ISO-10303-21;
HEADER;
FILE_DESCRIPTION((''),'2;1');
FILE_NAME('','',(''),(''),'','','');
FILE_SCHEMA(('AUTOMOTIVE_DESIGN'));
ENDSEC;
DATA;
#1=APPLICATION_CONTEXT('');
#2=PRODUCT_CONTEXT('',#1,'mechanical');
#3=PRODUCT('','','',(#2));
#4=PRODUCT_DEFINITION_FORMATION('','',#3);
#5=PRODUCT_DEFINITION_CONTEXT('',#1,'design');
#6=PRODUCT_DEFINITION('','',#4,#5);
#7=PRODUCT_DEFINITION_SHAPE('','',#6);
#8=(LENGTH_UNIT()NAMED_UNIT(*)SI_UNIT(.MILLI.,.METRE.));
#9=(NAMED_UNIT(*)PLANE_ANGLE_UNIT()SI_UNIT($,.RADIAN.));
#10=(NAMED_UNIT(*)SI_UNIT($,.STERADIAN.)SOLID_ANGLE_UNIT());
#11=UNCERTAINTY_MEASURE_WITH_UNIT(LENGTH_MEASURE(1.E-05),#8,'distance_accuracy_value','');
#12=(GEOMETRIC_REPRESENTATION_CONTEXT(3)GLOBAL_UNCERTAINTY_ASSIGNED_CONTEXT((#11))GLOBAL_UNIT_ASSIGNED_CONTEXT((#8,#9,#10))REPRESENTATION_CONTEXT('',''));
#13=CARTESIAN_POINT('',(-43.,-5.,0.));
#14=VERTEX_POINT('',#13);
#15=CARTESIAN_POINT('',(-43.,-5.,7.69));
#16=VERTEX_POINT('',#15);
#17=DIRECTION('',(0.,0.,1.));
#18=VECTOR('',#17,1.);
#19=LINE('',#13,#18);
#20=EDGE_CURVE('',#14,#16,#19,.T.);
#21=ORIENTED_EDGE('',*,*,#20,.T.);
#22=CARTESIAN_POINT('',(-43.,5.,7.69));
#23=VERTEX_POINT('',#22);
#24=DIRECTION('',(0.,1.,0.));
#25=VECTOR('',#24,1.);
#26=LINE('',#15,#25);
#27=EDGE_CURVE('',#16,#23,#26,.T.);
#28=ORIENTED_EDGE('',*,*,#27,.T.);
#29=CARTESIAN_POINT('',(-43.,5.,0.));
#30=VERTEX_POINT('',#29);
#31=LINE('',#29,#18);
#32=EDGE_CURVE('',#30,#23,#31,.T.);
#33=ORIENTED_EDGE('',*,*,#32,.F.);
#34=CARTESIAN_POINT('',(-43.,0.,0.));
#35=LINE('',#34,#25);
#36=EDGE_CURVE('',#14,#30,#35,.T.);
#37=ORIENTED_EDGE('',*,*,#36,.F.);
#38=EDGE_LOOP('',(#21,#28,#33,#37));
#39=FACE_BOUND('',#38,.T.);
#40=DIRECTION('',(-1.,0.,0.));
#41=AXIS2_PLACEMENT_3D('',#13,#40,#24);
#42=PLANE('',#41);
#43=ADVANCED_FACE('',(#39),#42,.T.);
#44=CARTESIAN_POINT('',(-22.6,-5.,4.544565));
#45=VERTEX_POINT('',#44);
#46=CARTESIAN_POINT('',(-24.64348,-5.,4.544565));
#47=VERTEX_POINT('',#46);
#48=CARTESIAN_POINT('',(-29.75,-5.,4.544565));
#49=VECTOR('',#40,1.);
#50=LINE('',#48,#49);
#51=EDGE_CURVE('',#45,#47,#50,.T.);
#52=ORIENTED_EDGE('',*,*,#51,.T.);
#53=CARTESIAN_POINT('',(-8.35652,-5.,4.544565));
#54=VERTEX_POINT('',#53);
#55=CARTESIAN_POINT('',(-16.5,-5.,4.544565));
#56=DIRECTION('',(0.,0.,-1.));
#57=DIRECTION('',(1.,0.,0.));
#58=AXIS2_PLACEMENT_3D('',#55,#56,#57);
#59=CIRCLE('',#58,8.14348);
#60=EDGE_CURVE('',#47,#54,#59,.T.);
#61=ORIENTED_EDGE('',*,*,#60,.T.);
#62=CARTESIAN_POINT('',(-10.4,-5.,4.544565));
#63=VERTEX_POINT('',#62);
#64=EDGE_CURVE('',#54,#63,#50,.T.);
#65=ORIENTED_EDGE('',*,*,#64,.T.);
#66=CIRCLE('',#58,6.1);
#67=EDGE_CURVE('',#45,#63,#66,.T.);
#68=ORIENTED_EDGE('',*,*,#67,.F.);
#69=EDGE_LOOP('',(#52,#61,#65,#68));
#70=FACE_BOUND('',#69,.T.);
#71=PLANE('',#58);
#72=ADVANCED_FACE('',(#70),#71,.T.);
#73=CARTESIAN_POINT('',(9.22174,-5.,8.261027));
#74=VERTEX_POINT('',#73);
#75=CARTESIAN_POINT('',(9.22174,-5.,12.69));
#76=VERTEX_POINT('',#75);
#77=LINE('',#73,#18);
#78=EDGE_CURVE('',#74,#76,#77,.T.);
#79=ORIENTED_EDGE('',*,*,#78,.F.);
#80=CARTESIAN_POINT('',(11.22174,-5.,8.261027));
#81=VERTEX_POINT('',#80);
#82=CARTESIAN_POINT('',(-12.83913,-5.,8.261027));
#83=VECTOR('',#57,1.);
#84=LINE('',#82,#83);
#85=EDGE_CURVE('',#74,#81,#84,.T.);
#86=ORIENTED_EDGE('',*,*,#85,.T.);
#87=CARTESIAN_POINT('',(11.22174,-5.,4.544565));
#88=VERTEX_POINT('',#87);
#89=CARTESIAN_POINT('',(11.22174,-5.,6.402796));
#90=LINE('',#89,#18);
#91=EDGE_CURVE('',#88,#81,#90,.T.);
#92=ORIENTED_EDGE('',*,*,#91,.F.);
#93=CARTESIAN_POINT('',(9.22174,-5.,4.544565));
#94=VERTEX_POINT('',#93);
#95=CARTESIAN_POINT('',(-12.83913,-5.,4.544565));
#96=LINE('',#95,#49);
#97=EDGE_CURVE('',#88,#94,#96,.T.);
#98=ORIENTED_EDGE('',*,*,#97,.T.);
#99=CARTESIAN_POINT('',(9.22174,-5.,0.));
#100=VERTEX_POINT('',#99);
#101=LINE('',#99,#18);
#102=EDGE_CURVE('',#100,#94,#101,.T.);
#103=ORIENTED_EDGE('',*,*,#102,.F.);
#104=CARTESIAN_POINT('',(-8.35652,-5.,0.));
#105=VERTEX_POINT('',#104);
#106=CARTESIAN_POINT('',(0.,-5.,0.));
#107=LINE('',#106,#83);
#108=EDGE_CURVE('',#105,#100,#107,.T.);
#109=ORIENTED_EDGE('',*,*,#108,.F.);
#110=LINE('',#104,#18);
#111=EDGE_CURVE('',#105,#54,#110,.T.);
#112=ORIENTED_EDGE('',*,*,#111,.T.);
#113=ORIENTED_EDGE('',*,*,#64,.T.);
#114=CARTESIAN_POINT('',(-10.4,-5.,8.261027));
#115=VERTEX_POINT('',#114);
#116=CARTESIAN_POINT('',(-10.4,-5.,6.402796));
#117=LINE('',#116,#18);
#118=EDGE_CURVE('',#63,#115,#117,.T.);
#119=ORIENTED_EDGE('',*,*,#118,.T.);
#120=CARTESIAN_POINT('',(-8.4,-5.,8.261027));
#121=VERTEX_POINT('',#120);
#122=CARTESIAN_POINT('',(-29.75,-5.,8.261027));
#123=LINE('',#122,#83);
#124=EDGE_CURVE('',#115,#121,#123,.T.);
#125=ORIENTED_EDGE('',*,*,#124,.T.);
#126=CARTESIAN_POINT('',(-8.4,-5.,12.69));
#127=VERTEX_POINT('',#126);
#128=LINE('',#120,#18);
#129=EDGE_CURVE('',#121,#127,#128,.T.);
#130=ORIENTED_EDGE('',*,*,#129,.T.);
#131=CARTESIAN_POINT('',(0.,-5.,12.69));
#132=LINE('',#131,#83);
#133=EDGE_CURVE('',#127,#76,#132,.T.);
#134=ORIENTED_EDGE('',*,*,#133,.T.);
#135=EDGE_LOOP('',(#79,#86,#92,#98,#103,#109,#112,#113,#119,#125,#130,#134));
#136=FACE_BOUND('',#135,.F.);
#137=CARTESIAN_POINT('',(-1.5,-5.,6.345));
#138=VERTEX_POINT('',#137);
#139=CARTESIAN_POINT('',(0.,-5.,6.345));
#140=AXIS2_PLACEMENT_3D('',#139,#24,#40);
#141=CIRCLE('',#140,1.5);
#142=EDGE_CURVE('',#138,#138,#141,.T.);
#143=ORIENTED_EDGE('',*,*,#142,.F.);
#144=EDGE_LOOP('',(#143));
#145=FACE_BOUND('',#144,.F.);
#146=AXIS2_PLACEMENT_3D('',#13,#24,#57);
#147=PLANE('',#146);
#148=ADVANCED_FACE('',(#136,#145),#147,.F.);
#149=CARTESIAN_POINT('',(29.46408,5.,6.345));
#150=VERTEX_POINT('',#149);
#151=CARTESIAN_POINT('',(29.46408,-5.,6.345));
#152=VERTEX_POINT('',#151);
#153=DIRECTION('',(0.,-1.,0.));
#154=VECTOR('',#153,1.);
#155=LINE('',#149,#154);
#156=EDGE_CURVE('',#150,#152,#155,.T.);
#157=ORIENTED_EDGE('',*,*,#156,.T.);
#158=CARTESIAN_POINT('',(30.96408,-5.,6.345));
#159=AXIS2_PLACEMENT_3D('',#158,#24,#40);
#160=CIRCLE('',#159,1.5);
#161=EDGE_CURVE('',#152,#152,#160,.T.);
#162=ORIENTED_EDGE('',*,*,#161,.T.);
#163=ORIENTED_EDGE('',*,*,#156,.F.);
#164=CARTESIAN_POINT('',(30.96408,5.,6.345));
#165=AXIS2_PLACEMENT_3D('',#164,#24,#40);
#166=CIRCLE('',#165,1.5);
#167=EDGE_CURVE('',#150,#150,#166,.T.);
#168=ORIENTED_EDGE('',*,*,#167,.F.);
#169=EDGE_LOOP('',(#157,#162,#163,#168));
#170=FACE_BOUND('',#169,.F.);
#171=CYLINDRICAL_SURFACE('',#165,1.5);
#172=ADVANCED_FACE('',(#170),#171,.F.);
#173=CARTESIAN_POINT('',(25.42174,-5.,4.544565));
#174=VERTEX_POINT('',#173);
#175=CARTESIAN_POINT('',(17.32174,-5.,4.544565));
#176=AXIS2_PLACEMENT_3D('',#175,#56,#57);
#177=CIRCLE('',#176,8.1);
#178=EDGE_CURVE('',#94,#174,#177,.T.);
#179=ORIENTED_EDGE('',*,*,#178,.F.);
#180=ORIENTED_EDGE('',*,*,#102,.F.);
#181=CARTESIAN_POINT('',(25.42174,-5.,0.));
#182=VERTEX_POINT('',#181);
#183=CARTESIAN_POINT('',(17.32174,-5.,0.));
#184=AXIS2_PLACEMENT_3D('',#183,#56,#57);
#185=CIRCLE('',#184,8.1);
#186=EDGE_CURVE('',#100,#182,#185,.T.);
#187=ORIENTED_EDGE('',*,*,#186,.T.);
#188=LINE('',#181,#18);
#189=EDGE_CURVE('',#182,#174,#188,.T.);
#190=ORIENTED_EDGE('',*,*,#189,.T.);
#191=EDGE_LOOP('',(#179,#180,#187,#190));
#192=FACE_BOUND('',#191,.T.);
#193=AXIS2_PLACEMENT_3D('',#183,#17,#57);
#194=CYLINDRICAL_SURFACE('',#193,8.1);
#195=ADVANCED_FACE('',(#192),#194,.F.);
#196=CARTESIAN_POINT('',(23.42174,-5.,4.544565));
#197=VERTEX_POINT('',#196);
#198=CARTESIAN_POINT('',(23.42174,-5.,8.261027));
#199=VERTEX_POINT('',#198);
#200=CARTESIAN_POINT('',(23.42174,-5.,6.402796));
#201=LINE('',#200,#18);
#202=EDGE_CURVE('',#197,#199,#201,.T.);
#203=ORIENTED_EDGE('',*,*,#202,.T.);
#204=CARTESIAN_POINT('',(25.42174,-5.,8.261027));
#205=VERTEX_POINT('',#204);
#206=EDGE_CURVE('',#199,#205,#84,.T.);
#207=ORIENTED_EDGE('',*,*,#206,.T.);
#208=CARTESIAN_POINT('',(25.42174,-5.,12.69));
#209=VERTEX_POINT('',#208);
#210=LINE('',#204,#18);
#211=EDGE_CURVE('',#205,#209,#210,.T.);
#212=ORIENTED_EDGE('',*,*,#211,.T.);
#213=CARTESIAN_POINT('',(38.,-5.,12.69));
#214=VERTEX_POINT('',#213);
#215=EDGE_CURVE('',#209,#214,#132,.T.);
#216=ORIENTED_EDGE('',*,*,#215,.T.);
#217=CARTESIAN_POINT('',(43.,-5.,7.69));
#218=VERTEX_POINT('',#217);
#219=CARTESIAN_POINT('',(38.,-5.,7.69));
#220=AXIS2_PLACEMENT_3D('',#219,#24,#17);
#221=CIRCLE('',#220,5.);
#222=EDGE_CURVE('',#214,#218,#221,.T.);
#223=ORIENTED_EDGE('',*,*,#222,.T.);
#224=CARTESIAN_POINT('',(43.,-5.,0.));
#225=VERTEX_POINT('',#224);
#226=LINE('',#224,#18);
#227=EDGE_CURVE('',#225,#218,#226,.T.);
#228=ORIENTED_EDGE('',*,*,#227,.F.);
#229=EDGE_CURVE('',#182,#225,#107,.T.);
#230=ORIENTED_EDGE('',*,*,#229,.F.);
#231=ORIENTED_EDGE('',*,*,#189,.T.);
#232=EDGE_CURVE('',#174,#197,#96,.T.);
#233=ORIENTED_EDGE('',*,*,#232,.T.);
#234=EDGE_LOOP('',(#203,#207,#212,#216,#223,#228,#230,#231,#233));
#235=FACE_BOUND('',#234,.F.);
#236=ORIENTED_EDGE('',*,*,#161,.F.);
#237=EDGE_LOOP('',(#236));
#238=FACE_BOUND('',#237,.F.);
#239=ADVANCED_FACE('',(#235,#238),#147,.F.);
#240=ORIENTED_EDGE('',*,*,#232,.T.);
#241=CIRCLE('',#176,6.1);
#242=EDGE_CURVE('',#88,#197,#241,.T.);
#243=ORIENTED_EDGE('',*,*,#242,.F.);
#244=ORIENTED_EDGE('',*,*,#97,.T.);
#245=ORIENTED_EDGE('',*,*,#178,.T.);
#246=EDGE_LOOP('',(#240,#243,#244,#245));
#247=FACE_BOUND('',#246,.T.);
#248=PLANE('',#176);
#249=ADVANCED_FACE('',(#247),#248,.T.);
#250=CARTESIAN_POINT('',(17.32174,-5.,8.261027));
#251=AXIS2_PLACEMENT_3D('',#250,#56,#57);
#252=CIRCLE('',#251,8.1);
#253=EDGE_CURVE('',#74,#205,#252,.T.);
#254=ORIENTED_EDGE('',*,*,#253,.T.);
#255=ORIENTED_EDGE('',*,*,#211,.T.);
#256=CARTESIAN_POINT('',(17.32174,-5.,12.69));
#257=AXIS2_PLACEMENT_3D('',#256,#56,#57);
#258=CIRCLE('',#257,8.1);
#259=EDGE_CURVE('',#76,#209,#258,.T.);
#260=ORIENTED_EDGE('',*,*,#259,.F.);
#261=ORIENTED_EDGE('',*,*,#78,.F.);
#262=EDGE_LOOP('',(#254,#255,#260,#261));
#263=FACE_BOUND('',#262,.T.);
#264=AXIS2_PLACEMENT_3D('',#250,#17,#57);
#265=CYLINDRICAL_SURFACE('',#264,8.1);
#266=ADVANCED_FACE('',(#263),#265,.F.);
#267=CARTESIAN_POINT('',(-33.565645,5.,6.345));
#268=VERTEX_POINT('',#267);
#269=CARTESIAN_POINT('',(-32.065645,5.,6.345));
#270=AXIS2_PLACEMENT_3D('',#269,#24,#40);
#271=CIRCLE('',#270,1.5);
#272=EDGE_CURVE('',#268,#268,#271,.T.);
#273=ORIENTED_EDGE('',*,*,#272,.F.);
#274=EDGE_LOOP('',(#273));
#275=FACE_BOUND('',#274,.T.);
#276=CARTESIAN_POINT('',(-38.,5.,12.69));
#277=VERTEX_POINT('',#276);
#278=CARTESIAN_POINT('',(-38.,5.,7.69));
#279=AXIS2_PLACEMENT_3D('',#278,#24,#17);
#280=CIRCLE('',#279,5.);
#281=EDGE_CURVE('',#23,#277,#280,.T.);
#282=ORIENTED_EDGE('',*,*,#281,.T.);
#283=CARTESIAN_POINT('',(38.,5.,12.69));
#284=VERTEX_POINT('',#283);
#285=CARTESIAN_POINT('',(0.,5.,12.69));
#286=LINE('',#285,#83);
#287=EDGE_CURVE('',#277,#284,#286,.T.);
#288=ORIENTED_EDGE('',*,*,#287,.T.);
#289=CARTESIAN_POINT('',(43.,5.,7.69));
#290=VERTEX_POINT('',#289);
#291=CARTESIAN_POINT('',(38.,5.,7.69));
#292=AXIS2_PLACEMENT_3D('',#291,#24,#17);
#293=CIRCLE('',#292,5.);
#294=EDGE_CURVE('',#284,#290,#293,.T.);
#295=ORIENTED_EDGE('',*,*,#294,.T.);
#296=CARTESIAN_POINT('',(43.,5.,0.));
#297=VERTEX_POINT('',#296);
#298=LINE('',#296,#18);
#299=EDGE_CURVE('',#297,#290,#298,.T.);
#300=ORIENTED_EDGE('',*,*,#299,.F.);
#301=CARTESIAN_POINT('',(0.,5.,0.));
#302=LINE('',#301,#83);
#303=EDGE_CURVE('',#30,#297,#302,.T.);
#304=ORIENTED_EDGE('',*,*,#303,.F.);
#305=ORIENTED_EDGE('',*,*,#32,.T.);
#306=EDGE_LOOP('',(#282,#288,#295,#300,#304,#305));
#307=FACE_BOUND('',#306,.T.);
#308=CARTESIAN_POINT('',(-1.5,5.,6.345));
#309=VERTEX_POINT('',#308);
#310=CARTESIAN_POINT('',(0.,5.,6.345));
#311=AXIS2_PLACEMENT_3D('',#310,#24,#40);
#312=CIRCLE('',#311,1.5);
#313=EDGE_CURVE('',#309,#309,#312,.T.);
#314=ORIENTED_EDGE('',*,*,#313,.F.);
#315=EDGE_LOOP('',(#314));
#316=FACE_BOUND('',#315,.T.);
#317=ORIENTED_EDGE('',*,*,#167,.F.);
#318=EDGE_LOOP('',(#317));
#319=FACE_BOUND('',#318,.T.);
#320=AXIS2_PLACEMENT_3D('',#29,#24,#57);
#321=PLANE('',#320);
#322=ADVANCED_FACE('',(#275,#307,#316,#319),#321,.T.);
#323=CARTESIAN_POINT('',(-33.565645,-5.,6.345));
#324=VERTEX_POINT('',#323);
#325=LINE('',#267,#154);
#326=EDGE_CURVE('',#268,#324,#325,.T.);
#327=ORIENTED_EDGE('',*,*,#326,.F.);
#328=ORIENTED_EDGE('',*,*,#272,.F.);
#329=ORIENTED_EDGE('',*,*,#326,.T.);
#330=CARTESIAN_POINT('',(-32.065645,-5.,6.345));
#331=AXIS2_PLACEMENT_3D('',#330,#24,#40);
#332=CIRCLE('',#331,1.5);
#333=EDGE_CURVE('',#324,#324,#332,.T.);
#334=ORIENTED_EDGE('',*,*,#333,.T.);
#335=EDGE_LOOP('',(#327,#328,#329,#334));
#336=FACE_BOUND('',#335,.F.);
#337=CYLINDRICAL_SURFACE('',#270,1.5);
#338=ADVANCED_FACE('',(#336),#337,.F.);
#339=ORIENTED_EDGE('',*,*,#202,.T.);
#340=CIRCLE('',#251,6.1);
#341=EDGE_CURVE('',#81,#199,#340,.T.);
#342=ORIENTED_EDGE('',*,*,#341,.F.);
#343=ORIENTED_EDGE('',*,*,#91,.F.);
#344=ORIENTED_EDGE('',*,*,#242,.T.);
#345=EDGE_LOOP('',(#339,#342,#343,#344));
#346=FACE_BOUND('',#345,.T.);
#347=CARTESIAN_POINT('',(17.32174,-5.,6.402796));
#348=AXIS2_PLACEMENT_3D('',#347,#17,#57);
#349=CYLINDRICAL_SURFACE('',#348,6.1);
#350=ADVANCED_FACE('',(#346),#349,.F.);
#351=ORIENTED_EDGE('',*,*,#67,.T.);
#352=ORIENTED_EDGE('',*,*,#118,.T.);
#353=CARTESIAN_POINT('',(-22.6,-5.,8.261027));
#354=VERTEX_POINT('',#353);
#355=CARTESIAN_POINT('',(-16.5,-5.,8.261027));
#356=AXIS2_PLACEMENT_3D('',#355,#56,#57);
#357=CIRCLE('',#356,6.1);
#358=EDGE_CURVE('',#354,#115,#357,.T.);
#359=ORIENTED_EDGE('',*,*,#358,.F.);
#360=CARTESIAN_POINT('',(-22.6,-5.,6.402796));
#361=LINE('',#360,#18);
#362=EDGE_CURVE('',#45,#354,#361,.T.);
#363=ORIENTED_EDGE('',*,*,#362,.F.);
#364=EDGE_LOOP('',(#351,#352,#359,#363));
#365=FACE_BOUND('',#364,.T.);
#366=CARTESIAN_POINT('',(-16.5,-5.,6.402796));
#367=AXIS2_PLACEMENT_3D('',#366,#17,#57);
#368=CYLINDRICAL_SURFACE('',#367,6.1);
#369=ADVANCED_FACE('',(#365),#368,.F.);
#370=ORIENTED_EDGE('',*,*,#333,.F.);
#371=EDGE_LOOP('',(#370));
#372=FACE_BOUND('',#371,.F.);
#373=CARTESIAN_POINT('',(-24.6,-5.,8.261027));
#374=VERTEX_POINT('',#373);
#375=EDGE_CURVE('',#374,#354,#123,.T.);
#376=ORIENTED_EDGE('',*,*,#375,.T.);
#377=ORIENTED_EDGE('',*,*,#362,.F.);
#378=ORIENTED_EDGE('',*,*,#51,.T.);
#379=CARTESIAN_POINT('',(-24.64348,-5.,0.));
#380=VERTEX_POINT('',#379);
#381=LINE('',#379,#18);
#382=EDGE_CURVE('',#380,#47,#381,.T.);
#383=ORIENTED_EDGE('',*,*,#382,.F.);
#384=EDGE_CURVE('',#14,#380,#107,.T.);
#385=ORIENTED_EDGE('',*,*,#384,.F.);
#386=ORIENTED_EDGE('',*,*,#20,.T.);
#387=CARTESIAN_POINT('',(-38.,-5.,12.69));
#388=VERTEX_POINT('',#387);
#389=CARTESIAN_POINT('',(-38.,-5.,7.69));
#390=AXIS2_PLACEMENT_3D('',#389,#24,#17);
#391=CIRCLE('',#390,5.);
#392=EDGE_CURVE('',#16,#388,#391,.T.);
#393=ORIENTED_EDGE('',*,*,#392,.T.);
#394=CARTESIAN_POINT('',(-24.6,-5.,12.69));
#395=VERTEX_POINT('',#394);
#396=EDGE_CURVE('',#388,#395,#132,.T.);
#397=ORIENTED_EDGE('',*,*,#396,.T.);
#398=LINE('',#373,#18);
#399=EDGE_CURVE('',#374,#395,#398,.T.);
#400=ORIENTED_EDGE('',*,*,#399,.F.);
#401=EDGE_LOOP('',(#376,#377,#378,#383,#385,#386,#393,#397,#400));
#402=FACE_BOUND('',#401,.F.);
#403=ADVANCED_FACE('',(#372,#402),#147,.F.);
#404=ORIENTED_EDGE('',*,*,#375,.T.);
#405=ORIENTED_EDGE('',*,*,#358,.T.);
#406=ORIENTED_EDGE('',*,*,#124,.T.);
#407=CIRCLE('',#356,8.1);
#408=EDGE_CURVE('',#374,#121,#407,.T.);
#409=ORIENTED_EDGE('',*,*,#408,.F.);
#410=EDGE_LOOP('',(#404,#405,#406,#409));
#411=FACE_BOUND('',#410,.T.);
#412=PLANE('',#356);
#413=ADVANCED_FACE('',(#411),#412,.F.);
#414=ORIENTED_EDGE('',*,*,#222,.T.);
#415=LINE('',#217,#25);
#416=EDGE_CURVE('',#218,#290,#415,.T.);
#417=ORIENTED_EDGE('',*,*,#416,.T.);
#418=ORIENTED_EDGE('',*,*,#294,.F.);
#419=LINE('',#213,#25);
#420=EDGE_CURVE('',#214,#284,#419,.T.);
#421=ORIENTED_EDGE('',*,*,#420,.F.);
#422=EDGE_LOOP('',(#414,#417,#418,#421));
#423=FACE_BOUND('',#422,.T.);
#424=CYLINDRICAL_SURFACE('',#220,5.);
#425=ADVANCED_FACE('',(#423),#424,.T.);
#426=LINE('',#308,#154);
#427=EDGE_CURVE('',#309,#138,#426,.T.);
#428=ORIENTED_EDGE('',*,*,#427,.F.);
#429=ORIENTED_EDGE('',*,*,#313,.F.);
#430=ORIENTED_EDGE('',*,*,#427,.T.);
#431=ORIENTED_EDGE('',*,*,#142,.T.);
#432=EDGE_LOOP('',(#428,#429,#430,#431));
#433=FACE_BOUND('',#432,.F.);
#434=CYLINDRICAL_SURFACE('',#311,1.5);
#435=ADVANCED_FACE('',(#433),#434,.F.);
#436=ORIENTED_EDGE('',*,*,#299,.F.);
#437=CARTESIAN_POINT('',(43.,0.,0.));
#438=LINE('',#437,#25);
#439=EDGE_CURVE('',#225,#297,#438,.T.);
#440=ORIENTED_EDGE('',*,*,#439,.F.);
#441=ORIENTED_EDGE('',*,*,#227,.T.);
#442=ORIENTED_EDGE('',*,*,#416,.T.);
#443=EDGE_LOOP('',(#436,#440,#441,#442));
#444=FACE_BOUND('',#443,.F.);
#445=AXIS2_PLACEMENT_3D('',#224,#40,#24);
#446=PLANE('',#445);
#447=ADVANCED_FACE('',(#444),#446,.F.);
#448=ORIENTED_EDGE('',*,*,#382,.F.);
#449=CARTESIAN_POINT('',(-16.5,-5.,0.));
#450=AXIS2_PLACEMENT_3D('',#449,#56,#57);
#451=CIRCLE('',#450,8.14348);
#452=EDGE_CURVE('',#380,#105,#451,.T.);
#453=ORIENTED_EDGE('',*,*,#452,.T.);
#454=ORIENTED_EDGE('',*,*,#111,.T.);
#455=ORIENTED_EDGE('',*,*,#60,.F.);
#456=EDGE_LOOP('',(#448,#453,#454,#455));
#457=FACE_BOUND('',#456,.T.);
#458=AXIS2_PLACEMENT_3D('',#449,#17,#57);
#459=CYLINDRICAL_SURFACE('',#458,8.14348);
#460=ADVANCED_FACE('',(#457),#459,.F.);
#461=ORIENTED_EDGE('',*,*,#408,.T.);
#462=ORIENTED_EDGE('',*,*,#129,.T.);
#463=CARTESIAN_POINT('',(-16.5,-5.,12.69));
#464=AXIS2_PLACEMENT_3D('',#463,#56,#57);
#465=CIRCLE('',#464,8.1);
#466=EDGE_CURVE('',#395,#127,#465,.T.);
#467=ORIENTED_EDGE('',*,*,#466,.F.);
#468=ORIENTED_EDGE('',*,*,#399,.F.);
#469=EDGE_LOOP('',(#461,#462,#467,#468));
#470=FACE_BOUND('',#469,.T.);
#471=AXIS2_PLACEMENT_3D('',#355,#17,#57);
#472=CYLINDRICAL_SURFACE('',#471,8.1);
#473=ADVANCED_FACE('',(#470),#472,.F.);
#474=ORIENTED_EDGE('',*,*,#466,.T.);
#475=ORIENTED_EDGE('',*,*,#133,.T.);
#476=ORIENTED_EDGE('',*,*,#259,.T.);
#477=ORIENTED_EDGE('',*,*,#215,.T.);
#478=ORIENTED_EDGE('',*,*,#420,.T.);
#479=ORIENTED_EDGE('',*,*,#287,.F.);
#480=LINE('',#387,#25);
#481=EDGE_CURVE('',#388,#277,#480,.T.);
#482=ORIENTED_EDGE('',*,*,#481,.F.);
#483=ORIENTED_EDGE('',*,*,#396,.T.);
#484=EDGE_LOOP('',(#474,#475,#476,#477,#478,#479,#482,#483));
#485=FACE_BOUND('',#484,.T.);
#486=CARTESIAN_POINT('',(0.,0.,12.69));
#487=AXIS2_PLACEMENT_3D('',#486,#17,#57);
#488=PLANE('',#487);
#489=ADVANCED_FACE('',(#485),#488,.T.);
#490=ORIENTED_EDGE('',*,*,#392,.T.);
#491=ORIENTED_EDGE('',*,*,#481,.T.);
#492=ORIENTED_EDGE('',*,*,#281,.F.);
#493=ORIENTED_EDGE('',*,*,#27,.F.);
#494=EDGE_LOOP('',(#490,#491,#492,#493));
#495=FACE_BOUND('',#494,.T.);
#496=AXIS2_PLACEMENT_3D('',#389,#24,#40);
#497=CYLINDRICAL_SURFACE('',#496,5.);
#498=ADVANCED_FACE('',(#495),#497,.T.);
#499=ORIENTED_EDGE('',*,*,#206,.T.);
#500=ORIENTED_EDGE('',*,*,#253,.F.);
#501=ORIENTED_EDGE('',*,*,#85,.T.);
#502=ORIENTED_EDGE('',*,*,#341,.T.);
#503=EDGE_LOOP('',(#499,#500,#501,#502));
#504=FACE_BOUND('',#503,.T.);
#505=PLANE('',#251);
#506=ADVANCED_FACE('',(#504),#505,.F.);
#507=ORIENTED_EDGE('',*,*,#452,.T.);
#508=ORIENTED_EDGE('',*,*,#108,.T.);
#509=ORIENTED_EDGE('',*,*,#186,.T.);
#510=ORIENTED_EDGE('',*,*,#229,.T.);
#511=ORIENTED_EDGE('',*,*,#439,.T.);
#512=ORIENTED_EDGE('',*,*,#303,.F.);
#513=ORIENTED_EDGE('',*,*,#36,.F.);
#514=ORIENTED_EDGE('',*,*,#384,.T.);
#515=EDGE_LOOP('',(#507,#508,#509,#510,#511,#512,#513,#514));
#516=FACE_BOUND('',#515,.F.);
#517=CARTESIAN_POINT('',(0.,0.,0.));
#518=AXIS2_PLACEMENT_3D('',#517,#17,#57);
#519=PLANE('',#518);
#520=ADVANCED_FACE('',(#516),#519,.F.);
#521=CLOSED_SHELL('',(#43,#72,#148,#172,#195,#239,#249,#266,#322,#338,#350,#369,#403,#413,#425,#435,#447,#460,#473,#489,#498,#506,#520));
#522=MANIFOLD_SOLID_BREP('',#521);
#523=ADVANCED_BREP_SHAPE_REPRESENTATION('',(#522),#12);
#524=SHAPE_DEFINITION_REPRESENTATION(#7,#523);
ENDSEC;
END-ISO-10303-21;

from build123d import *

# Parameters (mm, degrees)
F0_W     = 86
F0_H     = 10
F1_DEPTH = 12.69
F2_W     = 6.1
F2_H     = 3.7164622918
F4_W     = 6.1
F4_H     = 3.7164622918
F6_R     = 5
F7_R     = 1.5
F8_DEPTH = 10.001


# Not quite as in the source:
# - a feature names something its author has since deleted; it is built from what else it names


with BuildPart() as f1:
    # F0 (on Top) → F1 (new body)
    with BuildSketch(Plane.XY):
        Rectangle(F0_W, F0_H)
    extrude(amount=F1_DEPTH)

    # F2 (on face) → F3 (revolve, cut)
    with BuildSketch(Plane.XZ.offset(5)):
        Polygon((-8.4, 12.69), (-16.5, 12.69), (-16.5, 8.2610268146), (-10.4, 8.2610268146), (-8.4, 8.2610268146), align=None)
        with Locations((-13.45, 6.4027956687)):
            Rectangle(F2_W, F2_H)
        Polygon((-10.4, 4.5445645228), (-16.5, 4.5445645228), (-16.5, 0), (-8.3565199748, 0), (-8.3565199748, 4.5445645228), align=None)
    revolve(axis=Axis((-16.5, -5, 6.345), (0, 0, -1)), mode=Mode.SUBTRACT)

    # F4 (on face) → F5 (revolve, cut)
    with BuildSketch(Plane.XZ.offset(5)):
        Polygon((25.4217400126, 12.69), (17.3217400126, 12.69), (17.3217400126, 8.2610268146), (23.4217400126, 8.2610268146), (25.4217400126, 8.2610268146), align=None)
        with Locations((20.3717400126, 6.4027956687)):
            Rectangle(F4_W, F4_H)
        Polygon((23.4217400126, 4.5445645228), (17.3217400126, 4.5445645228), (17.3217400126, 0), (25.4217400126, 0), (25.4217400126, 4.5445645228), align=None)
    revolve(axis=Axis((17.3217400126, -5, 6.345), (0, 0, -1)), mode=Mode.SUBTRACT)

    # F6
    f6_edges = [f1.edges().sort_by_distance(p)[0] for p in [
        (-43, 0, 12.69),
        (43, 0, 12.69),
    ]]
    fillet(f6_edges, radius=F6_R)

    # F7 (on face) → F8 (cut, through all)
    with BuildSketch(Plane(origin=(0, 5, 0), x_dir=(-1, 0, 0), z_dir=(0, 1, 0))):
        with Locations((-30.9640802443, 6.345)):
            Circle(F7_R)
        with Locations((0, 6.345)):
            Circle(F7_R)
        with Locations((32.0656448603, 6.345)):
            Circle(F7_R)
    extrude(amount=-F8_DEPTH, mode=Mode.SUBTRACT)


solid = f1.part
